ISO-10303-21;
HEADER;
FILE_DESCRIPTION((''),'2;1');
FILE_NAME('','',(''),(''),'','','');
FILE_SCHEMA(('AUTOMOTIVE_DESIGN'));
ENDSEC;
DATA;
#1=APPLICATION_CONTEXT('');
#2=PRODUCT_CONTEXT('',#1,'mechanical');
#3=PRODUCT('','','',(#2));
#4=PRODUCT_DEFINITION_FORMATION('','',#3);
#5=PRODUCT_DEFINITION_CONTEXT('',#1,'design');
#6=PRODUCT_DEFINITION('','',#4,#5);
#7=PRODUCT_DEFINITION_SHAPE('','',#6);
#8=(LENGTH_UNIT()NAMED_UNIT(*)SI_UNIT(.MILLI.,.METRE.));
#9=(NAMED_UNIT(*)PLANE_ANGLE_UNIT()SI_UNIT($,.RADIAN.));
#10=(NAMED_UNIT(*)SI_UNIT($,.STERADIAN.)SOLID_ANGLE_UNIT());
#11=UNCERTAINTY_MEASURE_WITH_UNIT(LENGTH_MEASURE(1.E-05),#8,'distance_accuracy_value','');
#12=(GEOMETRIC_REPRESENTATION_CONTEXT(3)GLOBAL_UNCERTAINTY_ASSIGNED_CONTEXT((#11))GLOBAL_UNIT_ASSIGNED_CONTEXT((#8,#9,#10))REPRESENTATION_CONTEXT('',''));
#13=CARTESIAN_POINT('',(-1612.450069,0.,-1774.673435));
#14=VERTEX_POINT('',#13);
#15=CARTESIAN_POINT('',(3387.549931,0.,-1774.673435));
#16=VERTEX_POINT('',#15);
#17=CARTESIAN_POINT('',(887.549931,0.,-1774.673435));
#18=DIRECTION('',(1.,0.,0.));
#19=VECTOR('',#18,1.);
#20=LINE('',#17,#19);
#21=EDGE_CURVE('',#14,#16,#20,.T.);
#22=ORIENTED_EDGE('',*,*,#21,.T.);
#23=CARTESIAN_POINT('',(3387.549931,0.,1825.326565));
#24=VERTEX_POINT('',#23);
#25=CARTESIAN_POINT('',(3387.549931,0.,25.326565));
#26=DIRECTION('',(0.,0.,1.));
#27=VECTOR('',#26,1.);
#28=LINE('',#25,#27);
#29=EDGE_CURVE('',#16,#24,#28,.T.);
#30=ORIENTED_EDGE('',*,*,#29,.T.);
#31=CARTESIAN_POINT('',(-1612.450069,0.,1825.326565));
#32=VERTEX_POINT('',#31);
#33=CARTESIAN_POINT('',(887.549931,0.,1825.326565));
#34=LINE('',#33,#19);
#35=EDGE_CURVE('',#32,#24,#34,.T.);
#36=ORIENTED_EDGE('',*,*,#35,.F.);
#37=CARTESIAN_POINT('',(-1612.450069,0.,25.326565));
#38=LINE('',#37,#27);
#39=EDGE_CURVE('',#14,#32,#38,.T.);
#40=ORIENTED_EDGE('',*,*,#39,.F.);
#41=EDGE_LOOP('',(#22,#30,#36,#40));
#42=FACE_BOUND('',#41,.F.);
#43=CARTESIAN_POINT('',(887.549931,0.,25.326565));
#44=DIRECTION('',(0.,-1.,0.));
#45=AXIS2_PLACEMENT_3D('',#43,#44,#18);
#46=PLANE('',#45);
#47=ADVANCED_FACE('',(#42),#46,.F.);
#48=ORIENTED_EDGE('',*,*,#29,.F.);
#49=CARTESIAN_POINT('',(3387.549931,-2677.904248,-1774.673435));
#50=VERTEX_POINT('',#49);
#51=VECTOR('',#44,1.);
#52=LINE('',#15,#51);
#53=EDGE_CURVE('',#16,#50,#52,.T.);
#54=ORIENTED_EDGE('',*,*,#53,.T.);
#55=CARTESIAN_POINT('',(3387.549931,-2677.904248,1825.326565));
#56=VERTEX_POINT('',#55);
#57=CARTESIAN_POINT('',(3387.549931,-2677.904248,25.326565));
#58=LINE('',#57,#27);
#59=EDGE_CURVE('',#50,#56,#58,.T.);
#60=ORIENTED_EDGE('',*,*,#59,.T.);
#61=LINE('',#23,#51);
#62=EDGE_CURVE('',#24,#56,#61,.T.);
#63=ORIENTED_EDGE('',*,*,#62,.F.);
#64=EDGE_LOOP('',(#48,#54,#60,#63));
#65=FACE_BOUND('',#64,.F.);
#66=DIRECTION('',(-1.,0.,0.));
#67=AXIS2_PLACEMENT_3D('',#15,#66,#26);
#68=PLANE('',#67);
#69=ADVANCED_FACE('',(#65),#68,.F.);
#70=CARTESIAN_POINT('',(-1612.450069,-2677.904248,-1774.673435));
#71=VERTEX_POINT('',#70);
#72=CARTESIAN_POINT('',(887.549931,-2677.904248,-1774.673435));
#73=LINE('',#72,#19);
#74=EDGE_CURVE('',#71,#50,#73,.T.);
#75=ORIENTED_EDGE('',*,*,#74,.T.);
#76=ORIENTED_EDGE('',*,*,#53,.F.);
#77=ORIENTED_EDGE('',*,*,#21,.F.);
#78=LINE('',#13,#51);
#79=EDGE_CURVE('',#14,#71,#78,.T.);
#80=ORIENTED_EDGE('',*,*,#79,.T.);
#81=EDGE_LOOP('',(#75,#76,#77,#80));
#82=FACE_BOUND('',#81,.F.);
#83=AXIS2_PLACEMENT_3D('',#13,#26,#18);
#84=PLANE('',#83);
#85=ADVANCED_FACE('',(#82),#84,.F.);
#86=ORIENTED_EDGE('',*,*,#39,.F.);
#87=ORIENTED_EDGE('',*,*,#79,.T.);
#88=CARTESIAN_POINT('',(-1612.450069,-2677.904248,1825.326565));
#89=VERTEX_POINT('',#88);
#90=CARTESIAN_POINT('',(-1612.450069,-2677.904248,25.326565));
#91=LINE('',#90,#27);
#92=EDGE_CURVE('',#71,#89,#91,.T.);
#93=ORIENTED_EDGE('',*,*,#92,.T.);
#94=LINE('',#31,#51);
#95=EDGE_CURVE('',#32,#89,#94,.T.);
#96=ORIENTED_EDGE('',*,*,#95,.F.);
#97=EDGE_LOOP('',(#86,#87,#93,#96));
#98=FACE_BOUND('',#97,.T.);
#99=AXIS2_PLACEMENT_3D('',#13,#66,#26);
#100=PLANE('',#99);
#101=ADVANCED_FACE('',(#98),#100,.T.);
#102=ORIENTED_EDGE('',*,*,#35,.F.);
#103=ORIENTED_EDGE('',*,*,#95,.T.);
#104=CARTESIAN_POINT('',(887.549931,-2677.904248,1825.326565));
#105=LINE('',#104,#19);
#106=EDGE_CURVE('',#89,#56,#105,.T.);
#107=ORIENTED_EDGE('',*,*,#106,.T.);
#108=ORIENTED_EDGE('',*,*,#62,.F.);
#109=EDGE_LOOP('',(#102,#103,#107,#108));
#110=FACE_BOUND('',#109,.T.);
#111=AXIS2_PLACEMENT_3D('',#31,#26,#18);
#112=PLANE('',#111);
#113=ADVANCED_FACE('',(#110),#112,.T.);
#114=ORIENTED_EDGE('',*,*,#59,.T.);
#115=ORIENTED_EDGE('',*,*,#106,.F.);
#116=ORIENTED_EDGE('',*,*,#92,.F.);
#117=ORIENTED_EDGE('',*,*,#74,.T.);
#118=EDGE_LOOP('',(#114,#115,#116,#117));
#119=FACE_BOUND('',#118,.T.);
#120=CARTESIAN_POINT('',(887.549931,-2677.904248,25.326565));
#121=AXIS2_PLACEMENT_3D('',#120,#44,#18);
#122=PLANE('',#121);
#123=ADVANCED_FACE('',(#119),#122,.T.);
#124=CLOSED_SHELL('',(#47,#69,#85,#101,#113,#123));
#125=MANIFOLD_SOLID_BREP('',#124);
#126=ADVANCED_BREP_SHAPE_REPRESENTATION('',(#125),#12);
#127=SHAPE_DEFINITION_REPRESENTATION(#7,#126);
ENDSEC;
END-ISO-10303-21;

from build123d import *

# Parameters (mm, degrees)
F1_W     = 5000
F1_H     = 3600
F2_DEPTH = 2677.9042482376


# Not quite as in the source:
# - the program builds the solid bodies; features that only make, move or delete a surface that nothing else refers to are left out


with BuildPart() as f2:
    # F1 (on face) → F2 (new body)
    with BuildSketch(Plane.XZ):
        with Locations((887.5499308877, 25.326564908)):
            Rectangle(F1_W, F1_H)
    extrude(amount=F2_DEPTH)


solid = f2.part
